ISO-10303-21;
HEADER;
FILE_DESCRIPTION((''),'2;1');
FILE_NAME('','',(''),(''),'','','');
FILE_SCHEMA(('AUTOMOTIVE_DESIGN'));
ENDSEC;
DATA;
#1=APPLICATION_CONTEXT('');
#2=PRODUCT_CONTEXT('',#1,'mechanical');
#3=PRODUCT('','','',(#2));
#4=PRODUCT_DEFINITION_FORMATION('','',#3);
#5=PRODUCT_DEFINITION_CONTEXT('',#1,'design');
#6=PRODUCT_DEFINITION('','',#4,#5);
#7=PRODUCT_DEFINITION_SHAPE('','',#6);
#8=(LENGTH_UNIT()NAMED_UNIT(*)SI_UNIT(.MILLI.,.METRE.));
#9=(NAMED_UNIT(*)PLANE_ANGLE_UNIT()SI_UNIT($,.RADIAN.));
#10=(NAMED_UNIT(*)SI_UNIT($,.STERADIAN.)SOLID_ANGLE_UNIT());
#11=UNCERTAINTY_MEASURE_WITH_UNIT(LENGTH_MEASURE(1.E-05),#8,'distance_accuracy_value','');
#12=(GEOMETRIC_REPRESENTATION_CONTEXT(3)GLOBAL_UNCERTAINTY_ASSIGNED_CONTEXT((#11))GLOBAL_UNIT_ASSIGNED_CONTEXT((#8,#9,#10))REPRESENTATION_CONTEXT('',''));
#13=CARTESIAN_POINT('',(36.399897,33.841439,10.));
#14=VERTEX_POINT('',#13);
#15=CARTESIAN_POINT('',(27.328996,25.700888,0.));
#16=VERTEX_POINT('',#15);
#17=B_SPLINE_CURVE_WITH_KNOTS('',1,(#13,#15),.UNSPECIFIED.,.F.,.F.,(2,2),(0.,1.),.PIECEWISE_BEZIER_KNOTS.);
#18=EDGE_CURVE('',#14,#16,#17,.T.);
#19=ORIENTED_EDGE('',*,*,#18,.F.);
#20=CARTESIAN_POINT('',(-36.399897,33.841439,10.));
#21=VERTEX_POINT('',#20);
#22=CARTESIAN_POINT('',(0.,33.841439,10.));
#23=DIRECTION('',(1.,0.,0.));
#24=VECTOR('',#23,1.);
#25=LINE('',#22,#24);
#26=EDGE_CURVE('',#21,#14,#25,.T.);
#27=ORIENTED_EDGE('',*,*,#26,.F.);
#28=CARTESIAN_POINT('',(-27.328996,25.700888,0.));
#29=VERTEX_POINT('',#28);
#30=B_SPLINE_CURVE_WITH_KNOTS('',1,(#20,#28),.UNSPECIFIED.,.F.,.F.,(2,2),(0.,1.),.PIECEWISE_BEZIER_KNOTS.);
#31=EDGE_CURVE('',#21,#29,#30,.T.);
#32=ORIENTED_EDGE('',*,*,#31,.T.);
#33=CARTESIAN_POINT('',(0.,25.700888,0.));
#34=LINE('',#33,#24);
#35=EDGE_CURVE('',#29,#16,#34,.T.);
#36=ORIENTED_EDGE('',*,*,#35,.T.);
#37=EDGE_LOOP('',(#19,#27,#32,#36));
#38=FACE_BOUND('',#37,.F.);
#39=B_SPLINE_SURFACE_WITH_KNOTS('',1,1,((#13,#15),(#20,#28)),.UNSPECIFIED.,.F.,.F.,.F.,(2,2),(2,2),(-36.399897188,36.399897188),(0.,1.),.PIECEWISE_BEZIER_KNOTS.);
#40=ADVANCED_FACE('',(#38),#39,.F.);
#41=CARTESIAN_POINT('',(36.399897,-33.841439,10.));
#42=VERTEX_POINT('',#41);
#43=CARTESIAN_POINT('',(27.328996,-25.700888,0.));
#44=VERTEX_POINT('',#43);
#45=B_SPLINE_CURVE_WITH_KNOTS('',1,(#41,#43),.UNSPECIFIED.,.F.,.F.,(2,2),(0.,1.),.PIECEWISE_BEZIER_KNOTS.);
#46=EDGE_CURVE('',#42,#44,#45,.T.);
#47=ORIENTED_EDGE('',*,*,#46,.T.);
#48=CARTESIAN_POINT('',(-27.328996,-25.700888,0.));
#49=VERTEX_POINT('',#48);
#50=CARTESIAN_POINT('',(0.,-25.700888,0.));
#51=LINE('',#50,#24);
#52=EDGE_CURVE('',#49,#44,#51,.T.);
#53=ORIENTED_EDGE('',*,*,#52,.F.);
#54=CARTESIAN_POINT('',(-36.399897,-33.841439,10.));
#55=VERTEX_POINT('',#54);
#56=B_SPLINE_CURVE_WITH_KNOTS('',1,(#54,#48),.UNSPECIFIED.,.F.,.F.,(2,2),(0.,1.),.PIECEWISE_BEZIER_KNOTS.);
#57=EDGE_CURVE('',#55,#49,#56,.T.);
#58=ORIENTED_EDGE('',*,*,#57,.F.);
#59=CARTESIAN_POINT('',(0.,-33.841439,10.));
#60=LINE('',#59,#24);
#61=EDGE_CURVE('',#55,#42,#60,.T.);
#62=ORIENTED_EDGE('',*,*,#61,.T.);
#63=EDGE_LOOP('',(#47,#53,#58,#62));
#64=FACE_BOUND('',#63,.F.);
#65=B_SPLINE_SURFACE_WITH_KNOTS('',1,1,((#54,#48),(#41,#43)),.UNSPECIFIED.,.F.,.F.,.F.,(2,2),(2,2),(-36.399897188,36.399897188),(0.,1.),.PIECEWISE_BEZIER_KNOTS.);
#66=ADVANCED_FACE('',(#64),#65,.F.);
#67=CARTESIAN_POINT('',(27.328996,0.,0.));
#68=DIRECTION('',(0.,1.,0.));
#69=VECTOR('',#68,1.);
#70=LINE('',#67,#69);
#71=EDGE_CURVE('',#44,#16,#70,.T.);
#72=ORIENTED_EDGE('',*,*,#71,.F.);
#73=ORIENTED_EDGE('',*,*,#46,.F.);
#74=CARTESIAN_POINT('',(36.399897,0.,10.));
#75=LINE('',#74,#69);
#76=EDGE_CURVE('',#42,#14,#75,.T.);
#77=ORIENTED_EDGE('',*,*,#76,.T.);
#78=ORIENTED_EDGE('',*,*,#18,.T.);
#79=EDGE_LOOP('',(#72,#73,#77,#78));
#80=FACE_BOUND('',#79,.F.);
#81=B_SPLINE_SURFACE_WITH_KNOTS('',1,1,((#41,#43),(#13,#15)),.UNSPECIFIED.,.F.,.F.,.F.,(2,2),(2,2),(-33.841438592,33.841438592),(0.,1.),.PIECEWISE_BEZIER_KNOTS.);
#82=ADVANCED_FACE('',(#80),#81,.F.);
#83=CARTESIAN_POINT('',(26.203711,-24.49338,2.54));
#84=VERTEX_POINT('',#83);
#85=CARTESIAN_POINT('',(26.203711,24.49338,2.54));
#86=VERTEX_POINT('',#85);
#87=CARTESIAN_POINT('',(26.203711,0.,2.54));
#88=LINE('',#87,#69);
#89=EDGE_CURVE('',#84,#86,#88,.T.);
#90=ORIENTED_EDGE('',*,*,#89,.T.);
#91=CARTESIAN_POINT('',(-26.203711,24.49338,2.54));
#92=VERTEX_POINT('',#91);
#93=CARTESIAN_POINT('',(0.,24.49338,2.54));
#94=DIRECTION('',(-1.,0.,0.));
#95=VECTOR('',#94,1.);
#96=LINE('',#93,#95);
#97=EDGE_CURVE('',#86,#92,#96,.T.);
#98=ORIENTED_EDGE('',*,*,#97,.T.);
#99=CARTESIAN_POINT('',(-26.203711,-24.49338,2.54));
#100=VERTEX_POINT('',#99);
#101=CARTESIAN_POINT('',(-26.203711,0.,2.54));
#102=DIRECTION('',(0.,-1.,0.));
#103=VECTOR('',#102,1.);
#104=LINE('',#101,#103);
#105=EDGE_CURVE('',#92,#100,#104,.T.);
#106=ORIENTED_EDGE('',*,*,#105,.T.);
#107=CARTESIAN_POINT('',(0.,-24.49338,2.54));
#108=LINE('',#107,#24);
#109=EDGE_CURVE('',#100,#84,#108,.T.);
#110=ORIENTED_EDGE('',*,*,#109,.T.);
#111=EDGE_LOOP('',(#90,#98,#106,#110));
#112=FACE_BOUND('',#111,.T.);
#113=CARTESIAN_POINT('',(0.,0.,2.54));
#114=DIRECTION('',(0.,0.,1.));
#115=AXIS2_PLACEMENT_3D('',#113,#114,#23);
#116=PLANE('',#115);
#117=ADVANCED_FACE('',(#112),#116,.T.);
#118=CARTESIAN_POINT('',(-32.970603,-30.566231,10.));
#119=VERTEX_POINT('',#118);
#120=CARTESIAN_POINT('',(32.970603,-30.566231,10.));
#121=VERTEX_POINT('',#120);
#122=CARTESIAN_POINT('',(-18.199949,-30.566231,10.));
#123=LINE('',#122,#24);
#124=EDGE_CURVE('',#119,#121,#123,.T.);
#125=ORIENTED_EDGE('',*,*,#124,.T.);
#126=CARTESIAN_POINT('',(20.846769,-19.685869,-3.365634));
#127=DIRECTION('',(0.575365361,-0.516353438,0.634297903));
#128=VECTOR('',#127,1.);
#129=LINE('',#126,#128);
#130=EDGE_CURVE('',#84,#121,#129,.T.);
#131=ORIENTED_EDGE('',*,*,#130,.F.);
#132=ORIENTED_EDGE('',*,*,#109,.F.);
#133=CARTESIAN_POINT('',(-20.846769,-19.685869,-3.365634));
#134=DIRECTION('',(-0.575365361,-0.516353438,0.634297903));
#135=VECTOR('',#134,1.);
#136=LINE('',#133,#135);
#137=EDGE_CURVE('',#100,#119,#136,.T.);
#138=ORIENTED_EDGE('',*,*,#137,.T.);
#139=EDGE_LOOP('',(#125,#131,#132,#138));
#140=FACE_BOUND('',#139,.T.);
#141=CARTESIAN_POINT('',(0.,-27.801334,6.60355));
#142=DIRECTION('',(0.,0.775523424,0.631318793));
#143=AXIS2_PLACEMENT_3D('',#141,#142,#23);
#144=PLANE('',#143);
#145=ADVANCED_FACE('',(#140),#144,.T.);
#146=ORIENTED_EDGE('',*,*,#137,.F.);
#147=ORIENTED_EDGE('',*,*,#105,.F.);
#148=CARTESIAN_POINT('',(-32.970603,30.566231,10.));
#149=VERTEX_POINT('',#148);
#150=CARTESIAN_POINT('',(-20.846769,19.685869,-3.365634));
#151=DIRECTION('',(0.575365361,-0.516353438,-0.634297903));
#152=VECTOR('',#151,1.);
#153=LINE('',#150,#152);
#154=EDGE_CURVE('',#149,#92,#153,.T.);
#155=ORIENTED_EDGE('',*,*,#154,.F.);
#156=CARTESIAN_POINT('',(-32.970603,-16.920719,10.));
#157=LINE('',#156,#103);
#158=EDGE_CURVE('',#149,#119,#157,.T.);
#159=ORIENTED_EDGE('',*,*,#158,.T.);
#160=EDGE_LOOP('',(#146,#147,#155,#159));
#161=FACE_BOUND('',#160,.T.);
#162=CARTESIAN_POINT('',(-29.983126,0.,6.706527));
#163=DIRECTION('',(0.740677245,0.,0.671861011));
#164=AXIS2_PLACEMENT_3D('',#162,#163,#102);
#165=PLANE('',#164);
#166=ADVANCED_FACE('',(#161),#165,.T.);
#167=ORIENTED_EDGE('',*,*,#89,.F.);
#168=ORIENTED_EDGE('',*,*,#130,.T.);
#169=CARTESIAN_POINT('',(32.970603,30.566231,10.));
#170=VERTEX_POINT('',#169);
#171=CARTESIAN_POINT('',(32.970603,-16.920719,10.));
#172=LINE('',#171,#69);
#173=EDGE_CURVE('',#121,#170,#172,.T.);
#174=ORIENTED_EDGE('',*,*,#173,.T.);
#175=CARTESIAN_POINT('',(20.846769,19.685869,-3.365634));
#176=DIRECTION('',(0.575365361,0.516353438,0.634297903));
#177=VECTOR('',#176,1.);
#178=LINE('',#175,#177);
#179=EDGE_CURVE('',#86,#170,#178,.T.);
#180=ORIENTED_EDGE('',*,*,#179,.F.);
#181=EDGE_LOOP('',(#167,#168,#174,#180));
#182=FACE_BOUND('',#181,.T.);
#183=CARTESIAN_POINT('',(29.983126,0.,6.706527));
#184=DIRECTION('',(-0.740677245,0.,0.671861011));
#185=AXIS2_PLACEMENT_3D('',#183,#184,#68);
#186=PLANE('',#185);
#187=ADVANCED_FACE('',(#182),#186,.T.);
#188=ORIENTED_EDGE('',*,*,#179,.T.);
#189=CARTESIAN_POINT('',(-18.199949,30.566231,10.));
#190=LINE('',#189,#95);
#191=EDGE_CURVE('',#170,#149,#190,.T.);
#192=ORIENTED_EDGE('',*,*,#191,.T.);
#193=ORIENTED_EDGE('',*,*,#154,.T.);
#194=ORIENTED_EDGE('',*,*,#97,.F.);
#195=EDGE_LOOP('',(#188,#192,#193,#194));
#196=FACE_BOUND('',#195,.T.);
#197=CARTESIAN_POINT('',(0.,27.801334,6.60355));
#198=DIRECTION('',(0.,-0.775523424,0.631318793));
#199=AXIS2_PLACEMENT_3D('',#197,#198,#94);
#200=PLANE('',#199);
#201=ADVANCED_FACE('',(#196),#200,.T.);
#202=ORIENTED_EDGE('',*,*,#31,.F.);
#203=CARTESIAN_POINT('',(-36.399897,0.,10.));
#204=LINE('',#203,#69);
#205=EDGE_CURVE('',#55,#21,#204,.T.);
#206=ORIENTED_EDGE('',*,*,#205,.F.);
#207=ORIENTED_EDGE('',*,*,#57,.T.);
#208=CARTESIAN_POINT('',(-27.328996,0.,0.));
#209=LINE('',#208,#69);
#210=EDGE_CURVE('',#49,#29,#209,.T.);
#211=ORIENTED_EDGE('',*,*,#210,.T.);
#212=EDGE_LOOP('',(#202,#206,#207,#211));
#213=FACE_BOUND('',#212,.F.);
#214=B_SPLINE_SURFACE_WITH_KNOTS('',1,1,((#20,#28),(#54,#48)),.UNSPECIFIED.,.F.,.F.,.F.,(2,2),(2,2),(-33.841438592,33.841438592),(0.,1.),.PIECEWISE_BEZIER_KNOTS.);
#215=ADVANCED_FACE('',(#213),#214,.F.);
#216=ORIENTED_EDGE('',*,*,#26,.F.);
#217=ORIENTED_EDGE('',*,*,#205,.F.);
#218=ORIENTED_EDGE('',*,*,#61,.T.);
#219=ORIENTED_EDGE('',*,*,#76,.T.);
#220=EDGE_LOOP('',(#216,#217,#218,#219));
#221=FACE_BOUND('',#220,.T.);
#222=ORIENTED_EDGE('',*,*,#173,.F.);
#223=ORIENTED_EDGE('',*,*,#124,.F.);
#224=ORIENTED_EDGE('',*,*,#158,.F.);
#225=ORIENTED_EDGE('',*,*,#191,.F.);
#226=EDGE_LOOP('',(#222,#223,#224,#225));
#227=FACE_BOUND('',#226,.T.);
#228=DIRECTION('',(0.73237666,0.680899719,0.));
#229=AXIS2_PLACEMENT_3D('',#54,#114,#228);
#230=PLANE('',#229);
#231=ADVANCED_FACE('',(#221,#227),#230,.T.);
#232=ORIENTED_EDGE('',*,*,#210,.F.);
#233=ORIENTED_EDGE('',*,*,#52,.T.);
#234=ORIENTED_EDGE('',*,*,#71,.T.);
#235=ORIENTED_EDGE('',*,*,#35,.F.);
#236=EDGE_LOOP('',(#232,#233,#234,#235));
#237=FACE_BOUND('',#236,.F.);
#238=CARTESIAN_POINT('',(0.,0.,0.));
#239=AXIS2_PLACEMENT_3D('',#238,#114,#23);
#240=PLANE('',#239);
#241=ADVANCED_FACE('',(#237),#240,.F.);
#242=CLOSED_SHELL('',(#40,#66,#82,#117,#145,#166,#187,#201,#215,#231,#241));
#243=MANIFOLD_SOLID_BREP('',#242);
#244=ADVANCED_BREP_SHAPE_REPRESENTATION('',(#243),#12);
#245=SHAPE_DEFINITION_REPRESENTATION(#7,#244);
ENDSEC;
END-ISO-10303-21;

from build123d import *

# Parameters (mm, degrees)
F0_W      = 54.6579919755
F0_H      = 51.4017753303
F1_DEPTH  = 2
F3_W      = 72.7997943759
F3_H      = 67.682877183
F1_FACE_W = 54.6579919755
F1_FACE_H = 51.4017753303
F5_T      = -2.54


# Not quite as in the source:
# - the program builds the solid bodies; features that only make, move or delete a surface that nothing else refers to are left out


with BuildPart() as f1:
    # F0 (on Top) → F1 (new body)
    with BuildSketch(Plane.XY):
        Rectangle(F0_W, F0_H)
    extrude(amount=F1_DEPTH)

    # F3 (on offset) → F4 section 0
    with BuildSketch(Plane.XY.offset(10)):
        Rectangle(F3_W, F3_H)
    # F1_face (on face) → F4 section 1
    with BuildSketch(Plane(origin=(0, 0, 0), x_dir=(1, 0, 0), z_dir=(0, 0, -1))):
        Rectangle(F1_FACE_W, F1_FACE_H)
    loft()

    # F5
    f5_openings = [f1.faces().sort_by_distance(p)[0] for p in [
        (0, 0, 10),
    ]]
    offset(amount=F5_T, openings=f5_openings)


solid = f1.part
